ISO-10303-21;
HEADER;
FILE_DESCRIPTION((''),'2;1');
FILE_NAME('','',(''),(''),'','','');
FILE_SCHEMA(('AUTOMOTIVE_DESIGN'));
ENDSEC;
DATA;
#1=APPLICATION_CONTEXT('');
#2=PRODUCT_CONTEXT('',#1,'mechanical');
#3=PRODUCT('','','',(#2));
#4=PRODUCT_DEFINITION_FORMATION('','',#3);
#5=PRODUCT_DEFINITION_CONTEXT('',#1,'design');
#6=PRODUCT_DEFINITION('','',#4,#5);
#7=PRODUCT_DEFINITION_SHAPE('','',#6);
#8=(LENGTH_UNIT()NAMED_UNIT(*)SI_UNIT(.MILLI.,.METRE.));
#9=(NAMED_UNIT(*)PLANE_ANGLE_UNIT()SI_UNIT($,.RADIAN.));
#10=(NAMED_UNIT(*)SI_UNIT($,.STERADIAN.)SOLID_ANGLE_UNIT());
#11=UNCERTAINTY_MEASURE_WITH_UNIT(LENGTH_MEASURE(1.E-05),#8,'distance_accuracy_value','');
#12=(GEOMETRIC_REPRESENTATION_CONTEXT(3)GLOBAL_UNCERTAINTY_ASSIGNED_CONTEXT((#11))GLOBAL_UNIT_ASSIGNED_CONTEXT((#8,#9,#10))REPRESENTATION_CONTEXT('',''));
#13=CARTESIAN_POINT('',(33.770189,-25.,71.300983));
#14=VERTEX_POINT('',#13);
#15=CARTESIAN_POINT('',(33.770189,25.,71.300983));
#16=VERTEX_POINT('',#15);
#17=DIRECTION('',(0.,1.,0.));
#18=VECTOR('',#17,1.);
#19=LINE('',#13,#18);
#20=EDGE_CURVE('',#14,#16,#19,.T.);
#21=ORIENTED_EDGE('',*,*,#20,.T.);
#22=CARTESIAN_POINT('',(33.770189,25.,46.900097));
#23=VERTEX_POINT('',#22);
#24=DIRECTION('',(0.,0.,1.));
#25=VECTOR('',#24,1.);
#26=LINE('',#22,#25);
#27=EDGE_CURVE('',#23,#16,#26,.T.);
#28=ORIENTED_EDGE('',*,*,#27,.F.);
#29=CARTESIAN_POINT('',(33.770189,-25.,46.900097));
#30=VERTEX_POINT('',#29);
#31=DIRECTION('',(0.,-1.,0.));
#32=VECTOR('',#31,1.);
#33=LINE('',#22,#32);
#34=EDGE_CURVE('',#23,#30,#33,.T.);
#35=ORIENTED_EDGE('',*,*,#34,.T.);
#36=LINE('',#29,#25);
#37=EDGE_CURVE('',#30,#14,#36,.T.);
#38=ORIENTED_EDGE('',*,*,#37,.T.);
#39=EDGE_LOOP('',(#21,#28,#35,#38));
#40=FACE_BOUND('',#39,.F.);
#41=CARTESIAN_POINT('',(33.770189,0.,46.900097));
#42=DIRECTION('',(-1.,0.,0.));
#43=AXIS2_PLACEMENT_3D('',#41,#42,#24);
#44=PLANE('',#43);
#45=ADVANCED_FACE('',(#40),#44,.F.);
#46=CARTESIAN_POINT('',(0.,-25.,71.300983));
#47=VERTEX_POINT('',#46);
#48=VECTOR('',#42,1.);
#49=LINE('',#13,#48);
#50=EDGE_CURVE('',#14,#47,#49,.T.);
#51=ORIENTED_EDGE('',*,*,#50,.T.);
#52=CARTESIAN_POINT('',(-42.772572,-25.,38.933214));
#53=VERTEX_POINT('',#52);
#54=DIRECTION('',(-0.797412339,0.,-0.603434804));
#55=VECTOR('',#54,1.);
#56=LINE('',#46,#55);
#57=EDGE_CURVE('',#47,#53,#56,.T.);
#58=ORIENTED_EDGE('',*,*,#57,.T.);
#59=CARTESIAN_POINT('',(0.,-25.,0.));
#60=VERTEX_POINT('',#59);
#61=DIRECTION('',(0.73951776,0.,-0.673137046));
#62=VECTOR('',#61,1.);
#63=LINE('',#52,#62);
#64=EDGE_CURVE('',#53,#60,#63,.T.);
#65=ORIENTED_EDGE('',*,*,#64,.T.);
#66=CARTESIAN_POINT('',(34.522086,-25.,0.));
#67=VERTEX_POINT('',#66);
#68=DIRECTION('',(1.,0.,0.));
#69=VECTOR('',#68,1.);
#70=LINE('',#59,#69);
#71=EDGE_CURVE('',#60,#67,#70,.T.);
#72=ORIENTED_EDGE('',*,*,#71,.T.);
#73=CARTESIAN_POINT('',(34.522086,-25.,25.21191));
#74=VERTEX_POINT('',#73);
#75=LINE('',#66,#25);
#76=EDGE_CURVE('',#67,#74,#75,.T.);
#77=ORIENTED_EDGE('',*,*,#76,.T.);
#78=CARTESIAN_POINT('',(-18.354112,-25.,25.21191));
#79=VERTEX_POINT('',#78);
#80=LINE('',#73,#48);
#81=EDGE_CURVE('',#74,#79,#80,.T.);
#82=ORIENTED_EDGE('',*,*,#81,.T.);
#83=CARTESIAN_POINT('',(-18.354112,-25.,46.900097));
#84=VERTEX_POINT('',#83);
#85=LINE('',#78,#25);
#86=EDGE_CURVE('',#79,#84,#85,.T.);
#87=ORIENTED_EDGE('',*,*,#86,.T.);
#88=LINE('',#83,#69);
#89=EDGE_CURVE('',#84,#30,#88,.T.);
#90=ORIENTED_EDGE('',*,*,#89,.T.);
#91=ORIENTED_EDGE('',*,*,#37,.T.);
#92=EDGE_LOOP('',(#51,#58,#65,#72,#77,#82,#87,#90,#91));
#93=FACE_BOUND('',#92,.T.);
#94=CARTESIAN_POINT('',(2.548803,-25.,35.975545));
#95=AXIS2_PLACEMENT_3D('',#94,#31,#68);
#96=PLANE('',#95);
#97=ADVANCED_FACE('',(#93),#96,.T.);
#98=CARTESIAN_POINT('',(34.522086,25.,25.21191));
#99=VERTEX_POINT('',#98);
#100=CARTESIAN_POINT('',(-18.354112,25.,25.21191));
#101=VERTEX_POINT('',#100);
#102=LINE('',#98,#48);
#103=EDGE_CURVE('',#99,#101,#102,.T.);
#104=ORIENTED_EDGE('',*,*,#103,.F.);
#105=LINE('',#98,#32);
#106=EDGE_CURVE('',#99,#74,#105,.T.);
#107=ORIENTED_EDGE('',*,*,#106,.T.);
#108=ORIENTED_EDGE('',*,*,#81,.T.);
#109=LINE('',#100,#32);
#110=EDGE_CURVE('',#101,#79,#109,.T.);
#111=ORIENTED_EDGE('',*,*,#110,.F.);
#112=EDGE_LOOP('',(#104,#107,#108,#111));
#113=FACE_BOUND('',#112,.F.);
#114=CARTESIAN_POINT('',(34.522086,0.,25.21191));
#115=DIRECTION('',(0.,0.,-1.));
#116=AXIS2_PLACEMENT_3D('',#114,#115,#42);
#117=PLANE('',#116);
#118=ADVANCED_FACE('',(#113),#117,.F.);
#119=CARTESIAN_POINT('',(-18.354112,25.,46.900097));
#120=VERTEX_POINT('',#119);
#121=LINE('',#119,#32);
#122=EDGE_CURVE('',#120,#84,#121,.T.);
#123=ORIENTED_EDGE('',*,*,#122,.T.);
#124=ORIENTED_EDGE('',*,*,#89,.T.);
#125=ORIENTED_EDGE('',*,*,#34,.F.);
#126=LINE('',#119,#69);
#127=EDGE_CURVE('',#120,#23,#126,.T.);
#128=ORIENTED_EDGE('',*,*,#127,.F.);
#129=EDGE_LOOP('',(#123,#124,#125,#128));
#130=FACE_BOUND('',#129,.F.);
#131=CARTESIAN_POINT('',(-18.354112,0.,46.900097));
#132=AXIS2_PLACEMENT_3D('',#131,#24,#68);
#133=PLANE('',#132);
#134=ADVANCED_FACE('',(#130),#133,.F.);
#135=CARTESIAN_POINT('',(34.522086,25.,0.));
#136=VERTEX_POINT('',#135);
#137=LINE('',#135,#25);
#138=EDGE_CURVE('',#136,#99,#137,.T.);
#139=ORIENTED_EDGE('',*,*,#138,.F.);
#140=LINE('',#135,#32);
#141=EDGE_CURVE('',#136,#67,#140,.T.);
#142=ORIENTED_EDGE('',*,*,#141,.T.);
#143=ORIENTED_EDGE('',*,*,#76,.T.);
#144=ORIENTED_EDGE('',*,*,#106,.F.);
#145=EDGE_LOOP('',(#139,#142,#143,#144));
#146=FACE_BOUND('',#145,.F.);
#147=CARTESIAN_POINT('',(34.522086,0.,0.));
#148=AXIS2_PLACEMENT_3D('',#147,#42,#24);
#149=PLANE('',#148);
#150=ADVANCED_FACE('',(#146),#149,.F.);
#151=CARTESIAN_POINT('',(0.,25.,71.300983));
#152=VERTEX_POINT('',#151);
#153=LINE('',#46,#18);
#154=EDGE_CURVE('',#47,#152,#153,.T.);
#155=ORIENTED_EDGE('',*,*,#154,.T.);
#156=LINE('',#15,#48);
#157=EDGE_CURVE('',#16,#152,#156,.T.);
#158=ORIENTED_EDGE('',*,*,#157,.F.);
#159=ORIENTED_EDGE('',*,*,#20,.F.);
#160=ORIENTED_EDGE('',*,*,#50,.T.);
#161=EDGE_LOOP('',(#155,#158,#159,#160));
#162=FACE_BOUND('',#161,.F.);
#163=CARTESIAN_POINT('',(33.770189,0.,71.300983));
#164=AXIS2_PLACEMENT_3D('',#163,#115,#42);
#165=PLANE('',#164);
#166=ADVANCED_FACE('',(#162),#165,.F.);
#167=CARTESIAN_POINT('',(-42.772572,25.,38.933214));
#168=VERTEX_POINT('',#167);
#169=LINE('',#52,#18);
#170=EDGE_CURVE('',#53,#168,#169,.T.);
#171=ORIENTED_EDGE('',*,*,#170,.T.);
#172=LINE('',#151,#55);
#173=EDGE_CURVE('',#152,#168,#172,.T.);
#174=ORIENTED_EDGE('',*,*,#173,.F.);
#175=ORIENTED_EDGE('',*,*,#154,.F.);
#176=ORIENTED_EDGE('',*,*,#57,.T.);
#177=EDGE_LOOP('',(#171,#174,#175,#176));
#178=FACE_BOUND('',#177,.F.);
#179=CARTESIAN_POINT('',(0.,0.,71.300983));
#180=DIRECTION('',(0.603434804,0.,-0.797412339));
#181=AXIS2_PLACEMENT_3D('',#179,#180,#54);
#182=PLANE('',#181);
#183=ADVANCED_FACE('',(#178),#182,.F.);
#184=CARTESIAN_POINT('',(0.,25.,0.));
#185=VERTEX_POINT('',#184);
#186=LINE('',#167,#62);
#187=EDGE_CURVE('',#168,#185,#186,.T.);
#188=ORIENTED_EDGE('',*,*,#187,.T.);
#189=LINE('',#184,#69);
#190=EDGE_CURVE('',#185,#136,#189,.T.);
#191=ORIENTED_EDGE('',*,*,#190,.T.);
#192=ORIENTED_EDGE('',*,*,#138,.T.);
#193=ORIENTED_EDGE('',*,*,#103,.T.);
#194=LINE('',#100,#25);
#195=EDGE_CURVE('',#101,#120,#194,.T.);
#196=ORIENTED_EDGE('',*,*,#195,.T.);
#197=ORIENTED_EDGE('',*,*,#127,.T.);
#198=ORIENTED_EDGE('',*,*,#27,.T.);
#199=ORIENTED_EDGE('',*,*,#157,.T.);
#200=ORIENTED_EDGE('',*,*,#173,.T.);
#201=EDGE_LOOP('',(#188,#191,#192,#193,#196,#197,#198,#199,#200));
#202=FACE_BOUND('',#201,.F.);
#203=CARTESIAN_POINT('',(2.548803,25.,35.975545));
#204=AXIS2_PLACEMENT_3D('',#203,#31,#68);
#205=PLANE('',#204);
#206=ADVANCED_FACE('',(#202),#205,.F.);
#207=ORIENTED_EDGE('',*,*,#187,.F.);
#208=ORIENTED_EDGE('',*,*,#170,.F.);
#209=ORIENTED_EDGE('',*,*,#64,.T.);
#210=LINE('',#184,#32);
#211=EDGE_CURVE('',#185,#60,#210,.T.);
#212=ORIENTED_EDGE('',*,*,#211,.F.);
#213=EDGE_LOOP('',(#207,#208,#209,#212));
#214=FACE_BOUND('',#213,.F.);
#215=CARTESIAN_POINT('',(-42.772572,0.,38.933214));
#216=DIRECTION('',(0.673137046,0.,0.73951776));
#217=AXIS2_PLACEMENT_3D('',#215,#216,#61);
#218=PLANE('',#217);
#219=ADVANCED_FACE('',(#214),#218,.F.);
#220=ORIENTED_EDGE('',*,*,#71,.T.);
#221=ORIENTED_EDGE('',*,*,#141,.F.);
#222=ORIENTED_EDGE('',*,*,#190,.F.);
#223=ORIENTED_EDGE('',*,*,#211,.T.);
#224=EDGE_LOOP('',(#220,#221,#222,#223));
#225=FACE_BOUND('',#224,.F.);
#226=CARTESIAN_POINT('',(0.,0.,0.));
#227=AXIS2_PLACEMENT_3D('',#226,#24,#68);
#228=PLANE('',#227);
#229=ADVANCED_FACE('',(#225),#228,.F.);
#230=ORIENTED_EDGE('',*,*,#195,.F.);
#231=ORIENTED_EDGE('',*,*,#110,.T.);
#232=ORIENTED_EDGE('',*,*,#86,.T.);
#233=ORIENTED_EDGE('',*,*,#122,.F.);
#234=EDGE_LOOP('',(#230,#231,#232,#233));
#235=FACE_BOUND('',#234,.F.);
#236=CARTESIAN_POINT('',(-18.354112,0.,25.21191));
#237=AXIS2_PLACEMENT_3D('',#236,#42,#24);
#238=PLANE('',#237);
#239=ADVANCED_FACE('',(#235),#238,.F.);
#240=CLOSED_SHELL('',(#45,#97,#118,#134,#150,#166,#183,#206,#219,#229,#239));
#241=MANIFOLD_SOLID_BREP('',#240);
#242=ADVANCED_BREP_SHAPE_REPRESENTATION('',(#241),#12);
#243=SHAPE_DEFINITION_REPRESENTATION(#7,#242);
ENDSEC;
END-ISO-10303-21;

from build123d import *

# Parameters (mm, degrees)
F1_DEPTH      = 25
F1_DEPTH_BACK = 25


with BuildPart() as f1:
    # F0 (on Front) → F1 (new body, two sides)
    with BuildSketch(Plane.XZ) as f1_sk:
        Polygon((-42.7725724876, 38.9332138002), (0, 0), (34.5220863819, 0), (34.5220863819, 25.2119097859), (-18.3541122824, 25.2119097859), (-18.3541122824, 46.9000972807), (33.7701886892, 46.9000972807), (33.7701886892, 71.300983429), (0, 71.300983429), align=None)
    extrude(amount=-F1_DEPTH)
    extrude(f1_sk.sketch, amount=F1_DEPTH_BACK)


solid = f1.part
